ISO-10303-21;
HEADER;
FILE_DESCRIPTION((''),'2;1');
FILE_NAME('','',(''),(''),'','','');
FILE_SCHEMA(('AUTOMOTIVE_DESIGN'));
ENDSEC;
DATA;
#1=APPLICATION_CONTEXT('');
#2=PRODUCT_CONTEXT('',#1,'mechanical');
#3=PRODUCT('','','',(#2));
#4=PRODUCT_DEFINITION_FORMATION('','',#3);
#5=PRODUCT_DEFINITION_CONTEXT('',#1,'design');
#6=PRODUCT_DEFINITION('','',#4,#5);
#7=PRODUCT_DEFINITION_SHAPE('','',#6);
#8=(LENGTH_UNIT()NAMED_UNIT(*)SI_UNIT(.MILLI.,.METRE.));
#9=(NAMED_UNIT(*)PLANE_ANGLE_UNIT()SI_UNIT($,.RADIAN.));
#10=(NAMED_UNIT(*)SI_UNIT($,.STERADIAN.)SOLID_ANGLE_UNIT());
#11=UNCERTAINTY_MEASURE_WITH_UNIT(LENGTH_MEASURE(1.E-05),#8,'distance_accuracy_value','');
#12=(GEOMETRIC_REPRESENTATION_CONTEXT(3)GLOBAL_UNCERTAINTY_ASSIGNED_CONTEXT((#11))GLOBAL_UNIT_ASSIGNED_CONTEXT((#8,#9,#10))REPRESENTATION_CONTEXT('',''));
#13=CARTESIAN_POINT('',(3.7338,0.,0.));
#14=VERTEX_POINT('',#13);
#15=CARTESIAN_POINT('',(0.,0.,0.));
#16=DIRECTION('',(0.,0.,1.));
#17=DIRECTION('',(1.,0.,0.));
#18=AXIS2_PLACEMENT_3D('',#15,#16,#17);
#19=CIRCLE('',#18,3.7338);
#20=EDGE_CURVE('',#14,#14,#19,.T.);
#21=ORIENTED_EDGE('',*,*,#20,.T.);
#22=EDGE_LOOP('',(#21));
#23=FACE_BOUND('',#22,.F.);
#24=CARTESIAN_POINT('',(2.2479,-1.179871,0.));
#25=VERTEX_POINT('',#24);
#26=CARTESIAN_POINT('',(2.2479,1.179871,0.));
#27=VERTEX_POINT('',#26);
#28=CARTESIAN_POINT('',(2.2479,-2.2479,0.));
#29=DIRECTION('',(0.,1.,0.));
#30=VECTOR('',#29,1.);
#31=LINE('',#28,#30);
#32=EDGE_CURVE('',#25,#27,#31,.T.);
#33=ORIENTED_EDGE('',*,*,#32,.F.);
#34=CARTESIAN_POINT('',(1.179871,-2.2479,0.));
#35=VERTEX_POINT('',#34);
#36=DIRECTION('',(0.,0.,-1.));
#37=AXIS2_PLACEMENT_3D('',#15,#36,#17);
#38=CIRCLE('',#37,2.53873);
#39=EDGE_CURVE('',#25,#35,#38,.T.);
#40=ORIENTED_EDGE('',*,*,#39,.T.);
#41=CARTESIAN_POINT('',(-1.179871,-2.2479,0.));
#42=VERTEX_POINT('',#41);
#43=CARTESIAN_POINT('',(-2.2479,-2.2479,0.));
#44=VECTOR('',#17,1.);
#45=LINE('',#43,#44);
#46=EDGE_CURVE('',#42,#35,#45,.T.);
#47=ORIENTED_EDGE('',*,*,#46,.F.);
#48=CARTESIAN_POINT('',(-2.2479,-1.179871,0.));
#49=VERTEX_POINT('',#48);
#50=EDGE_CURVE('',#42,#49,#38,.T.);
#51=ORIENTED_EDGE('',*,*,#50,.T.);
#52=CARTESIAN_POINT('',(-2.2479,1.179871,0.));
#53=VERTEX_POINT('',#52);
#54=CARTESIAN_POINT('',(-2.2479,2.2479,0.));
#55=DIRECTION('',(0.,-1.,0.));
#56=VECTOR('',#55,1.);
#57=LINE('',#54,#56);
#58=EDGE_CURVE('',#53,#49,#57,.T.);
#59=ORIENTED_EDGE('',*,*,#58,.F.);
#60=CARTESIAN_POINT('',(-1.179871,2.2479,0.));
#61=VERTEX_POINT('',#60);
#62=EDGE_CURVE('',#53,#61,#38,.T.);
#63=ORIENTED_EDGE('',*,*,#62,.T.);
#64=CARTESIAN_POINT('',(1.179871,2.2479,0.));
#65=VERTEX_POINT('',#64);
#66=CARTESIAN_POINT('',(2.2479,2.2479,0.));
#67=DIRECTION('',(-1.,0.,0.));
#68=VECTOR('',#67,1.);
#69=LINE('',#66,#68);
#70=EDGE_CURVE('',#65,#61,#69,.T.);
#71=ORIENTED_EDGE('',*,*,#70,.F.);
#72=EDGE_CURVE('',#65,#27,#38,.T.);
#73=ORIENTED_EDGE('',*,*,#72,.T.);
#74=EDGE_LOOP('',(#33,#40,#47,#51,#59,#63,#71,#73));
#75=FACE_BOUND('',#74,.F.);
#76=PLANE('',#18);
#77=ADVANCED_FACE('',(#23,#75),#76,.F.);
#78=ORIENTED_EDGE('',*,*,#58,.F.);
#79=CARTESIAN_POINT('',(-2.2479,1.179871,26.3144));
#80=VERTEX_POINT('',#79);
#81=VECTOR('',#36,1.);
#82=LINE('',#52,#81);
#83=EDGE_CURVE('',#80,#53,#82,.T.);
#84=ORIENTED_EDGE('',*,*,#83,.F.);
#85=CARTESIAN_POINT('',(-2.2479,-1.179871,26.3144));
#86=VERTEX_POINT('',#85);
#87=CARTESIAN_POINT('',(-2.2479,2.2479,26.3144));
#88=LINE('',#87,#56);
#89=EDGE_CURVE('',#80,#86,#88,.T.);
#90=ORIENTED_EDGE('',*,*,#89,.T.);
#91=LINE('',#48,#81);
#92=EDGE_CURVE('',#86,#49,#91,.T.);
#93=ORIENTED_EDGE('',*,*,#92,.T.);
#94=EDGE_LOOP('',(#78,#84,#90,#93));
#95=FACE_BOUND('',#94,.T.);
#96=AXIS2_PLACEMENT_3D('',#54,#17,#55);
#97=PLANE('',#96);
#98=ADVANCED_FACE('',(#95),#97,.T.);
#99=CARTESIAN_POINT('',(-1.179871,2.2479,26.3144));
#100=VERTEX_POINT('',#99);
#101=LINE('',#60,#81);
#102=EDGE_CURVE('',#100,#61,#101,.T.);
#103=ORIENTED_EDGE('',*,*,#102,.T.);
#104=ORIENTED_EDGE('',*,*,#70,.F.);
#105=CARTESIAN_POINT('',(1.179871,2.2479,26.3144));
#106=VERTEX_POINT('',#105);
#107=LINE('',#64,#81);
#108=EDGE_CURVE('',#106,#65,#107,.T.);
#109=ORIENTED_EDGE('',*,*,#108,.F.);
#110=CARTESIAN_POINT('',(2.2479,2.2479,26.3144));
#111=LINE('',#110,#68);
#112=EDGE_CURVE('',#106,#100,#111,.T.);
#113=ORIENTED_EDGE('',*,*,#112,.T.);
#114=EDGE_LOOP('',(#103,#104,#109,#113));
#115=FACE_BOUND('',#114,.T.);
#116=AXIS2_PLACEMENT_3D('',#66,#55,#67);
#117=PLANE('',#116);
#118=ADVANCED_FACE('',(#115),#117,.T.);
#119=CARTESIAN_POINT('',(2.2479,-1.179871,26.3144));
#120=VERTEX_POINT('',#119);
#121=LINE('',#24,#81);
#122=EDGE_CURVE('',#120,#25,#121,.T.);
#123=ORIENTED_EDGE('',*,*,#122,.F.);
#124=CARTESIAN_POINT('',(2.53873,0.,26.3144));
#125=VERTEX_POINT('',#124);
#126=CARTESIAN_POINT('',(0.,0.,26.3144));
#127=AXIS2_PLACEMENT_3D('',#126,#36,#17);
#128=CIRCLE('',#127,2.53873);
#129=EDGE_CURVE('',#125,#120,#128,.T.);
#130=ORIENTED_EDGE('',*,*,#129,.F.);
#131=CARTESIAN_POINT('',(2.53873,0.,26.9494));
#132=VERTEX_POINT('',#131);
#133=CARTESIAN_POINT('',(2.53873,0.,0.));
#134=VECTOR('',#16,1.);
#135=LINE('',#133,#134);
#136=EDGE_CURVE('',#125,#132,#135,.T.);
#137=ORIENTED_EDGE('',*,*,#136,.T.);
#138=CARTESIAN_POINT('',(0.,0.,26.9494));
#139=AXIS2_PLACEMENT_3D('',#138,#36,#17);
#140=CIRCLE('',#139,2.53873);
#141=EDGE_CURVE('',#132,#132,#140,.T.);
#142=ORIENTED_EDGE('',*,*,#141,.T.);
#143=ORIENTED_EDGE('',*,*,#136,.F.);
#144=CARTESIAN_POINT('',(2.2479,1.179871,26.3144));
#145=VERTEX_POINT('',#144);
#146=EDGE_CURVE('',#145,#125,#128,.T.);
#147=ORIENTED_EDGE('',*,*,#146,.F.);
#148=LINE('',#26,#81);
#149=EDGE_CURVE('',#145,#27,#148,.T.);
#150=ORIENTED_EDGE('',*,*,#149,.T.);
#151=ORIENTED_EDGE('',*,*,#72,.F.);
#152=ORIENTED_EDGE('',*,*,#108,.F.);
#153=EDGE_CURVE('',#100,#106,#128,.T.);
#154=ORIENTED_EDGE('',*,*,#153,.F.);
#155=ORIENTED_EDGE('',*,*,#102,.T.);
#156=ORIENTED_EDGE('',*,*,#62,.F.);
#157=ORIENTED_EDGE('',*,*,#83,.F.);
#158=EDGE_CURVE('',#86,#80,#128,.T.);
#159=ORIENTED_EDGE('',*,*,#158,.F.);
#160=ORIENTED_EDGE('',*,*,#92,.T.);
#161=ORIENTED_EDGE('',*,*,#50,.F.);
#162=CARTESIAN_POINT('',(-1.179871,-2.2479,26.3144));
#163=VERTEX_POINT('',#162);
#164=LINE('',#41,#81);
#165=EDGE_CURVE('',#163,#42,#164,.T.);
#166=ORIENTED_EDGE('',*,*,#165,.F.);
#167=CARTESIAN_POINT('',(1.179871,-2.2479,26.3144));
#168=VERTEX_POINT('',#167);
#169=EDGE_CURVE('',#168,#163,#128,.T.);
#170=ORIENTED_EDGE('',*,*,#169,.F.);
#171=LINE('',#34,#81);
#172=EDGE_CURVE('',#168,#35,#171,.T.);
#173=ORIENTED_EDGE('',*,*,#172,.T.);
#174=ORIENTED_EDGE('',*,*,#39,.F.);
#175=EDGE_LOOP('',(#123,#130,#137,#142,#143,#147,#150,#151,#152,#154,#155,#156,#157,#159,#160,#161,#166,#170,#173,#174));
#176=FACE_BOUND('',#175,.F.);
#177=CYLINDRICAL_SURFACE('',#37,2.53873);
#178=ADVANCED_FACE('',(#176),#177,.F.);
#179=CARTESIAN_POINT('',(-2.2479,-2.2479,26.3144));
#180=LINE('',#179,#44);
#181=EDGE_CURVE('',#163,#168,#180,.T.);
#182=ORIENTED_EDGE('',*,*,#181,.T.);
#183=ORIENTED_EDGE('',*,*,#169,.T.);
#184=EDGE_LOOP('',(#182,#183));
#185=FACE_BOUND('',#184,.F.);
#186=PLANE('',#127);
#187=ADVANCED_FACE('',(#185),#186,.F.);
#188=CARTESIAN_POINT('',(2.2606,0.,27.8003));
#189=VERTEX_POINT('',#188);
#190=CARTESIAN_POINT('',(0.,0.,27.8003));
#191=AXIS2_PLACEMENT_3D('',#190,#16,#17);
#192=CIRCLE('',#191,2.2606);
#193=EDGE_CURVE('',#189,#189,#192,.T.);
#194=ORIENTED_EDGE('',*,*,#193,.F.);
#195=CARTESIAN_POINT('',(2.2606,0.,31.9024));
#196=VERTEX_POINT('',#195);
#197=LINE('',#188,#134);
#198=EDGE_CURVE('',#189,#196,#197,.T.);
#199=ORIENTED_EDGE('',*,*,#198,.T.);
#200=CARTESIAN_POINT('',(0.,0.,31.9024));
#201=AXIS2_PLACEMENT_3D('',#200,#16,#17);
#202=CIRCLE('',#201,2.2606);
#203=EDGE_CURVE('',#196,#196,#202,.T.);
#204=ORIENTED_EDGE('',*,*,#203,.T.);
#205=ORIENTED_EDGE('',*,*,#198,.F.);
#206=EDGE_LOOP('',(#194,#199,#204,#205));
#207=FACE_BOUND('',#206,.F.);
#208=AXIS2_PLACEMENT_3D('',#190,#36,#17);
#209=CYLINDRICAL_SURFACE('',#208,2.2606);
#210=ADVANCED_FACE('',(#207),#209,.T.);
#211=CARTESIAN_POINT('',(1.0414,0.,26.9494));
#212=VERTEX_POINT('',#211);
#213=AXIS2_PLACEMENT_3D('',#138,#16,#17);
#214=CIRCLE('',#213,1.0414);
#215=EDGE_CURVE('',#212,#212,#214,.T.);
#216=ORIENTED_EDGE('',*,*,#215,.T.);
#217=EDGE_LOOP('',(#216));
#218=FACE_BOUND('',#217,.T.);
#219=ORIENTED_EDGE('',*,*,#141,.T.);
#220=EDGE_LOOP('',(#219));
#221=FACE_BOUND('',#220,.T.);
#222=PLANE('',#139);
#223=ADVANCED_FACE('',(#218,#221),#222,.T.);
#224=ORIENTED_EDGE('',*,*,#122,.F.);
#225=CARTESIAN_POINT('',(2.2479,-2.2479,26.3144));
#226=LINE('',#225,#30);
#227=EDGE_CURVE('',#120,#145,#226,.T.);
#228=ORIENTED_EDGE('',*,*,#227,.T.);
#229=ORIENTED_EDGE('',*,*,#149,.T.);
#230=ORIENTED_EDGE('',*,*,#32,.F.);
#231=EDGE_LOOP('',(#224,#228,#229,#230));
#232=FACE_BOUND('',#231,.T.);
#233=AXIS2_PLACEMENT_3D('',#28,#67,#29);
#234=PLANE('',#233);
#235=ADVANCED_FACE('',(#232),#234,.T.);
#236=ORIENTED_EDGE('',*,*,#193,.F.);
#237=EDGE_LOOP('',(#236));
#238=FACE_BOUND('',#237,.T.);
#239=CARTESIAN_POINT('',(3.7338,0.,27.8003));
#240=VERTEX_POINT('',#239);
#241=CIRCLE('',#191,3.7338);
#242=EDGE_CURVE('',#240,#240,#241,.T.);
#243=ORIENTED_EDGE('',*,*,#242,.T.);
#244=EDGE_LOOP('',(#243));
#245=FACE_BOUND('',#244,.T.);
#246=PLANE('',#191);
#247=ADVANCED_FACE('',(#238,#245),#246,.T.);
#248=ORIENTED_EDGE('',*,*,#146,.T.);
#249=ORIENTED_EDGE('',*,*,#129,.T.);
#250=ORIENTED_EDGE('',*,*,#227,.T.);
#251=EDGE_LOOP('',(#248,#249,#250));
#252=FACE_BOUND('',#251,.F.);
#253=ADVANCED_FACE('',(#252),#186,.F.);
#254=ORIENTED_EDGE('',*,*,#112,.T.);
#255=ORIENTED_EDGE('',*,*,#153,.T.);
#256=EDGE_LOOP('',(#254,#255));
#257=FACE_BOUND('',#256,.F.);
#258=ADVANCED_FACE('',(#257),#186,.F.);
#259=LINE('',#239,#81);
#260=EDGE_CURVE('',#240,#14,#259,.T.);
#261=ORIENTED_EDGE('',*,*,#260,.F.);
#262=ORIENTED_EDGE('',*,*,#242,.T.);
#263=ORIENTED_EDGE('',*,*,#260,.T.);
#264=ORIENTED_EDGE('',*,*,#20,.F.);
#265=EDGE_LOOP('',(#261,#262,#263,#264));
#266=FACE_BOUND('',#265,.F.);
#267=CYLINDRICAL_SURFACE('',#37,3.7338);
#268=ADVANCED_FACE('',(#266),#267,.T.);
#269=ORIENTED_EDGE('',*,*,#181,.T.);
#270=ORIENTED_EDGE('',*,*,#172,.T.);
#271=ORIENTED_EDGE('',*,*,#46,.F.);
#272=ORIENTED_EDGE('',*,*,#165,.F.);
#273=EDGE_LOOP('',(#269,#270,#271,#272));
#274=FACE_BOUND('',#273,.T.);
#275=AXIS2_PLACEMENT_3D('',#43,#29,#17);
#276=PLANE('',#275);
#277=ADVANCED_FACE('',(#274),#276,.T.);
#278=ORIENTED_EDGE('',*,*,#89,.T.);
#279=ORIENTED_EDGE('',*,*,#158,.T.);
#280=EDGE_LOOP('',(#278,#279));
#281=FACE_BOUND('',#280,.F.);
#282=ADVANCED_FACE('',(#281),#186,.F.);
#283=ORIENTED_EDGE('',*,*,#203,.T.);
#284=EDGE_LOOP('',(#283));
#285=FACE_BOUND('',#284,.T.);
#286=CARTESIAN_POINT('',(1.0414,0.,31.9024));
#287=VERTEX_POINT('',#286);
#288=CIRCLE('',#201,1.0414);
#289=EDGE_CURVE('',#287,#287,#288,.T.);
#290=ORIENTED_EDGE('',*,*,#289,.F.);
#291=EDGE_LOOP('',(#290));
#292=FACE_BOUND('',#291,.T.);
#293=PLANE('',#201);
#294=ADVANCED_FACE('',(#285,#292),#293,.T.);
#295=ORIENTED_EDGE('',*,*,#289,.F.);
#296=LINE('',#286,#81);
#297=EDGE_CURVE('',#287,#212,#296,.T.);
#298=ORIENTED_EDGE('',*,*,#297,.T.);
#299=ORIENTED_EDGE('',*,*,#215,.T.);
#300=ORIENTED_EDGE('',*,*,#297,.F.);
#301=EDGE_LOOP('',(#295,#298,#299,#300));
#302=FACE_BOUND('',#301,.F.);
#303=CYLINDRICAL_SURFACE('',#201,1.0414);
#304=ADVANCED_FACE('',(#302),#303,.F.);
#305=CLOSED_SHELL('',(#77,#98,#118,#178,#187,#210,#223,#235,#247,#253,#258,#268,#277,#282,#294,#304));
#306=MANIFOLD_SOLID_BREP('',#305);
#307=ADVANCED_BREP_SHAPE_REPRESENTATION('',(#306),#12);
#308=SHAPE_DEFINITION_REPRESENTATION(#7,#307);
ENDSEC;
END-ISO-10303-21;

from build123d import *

# Parameters (mm, degrees)
F0_R     = 3.7338
F1_DEPTH = 27.8003
F2_R     = 2.2606
F3_DEPTH = 4.1021
F4_R     = 1.0414
F5_DEPTH = 47.0154
F6_R     = 2.53873
F7_DEPTH = 26.9494
F8_R     = 3.7338
F9_DEPTH = 26.3144


with BuildPart() as f1:
    # F0 (on Top) → F1 (new body)
    with BuildSketch(Plane.XY):
        Circle(F0_R)
    extrude(amount=F1_DEPTH)

    # F2 (on face) → F3 (join)
    with BuildSketch(Plane.XY.offset(27.8003)):
        Circle(F2_R)
    extrude(amount=F3_DEPTH)

    # F4 (on face) → F5 (cut)
    with BuildSketch(Plane.XY.offset(31.9024)):
        Circle(F4_R)
    extrude(amount=-F5_DEPTH, mode=Mode.SUBTRACT)

    # F6 (on face) → F7 (cut)
    with BuildSketch(Plane(origin=(0, 0, 0), x_dir=(1, 0, 0), z_dir=(0, 0, -1))):
        Circle(F6_R)
    extrude(amount=-F7_DEPTH, mode=Mode.SUBTRACT)

    # F8 (on face) → F9 (join)
    with BuildSketch(Plane(origin=(0, 0, 0), x_dir=(1, 0, 0), z_dir=(0, 0, -1))):
        Circle(F8_R)
        with BuildLine():
            Line((1.1798710111, 2.2479), (2.2479, 2.2479))
            Line((2.2479, 2.2479), (2.2479, 1.1798710111))
            ThreePointArc((2.2479, 1.1798710111), (2.4649504234, 0.6075931393), (2.53873, 0))
            ThreePointArc((2.53873, 0), (2.4649504234, -0.6075931393), (2.2479, -1.1798710111))
            Line((2.2479, -1.1798710111), (2.2479, -2.2479))
            Line((2.2479, -2.2479), (1.1798710111, -2.2479))
            ThreePointArc((1.1798710111, -2.2479), (0, -2.53873), (-1.1798710111, -2.2479))
            Line((-1.1798710111, -2.2479), (-2.2479, -2.2479))
            Line((-2.2479, -2.2479), (-2.2479, -1.1798710111))
            ThreePointArc((-2.2479, -1.1798710111), (-2.53873, 0), (-2.2479, 1.1798710111))
            Line((-2.2479, 1.1798710111), (-2.2479, 2.2479))
            Line((-2.2479, 2.2479), (-1.1798710111, 2.2479))
            ThreePointArc((-1.1798710111, 2.2479), (0, 2.53873), (1.1798710111, 2.2479))
        make_face(mode=Mode.SUBTRACT)
        with BuildLine():
            Line((-1.1798710111, 2.2479), (1.1798710111, 2.2479))
            ThreePointArc((1.1798710111, 2.2479), (0, 2.53873), (-1.1798710111, 2.2479))
        make_face()
        with BuildLine():
            ThreePointArc((2.53873, 0), (2.4649504234, 0.6075931393), (2.2479, 1.1798710111))
            Line((2.2479, 1.1798710111), (2.2479, -1.1798710111))
            ThreePointArc((2.2479, -1.1798710111), (2.4649504234, -0.6075931393), (2.53873, 0))
        make_face()
        with BuildLine():
            Line((-2.2479, -1.1798710111), (-2.2479, 1.1798710111))
            ThreePointArc((-2.2479, 1.1798710111), (-2.53873, 0), (-2.2479, -1.1798710111))
        make_face()
        with BuildLine():
            ThreePointArc((-1.1798710111, -2.2479), (0, -2.53873), (1.1798710111, -2.2479))
            Line((1.1798710111, -2.2479), (-1.1798710111, -2.2479))
        make_face()
    extrude(amount=-F9_DEPTH)


solid = f1.part
